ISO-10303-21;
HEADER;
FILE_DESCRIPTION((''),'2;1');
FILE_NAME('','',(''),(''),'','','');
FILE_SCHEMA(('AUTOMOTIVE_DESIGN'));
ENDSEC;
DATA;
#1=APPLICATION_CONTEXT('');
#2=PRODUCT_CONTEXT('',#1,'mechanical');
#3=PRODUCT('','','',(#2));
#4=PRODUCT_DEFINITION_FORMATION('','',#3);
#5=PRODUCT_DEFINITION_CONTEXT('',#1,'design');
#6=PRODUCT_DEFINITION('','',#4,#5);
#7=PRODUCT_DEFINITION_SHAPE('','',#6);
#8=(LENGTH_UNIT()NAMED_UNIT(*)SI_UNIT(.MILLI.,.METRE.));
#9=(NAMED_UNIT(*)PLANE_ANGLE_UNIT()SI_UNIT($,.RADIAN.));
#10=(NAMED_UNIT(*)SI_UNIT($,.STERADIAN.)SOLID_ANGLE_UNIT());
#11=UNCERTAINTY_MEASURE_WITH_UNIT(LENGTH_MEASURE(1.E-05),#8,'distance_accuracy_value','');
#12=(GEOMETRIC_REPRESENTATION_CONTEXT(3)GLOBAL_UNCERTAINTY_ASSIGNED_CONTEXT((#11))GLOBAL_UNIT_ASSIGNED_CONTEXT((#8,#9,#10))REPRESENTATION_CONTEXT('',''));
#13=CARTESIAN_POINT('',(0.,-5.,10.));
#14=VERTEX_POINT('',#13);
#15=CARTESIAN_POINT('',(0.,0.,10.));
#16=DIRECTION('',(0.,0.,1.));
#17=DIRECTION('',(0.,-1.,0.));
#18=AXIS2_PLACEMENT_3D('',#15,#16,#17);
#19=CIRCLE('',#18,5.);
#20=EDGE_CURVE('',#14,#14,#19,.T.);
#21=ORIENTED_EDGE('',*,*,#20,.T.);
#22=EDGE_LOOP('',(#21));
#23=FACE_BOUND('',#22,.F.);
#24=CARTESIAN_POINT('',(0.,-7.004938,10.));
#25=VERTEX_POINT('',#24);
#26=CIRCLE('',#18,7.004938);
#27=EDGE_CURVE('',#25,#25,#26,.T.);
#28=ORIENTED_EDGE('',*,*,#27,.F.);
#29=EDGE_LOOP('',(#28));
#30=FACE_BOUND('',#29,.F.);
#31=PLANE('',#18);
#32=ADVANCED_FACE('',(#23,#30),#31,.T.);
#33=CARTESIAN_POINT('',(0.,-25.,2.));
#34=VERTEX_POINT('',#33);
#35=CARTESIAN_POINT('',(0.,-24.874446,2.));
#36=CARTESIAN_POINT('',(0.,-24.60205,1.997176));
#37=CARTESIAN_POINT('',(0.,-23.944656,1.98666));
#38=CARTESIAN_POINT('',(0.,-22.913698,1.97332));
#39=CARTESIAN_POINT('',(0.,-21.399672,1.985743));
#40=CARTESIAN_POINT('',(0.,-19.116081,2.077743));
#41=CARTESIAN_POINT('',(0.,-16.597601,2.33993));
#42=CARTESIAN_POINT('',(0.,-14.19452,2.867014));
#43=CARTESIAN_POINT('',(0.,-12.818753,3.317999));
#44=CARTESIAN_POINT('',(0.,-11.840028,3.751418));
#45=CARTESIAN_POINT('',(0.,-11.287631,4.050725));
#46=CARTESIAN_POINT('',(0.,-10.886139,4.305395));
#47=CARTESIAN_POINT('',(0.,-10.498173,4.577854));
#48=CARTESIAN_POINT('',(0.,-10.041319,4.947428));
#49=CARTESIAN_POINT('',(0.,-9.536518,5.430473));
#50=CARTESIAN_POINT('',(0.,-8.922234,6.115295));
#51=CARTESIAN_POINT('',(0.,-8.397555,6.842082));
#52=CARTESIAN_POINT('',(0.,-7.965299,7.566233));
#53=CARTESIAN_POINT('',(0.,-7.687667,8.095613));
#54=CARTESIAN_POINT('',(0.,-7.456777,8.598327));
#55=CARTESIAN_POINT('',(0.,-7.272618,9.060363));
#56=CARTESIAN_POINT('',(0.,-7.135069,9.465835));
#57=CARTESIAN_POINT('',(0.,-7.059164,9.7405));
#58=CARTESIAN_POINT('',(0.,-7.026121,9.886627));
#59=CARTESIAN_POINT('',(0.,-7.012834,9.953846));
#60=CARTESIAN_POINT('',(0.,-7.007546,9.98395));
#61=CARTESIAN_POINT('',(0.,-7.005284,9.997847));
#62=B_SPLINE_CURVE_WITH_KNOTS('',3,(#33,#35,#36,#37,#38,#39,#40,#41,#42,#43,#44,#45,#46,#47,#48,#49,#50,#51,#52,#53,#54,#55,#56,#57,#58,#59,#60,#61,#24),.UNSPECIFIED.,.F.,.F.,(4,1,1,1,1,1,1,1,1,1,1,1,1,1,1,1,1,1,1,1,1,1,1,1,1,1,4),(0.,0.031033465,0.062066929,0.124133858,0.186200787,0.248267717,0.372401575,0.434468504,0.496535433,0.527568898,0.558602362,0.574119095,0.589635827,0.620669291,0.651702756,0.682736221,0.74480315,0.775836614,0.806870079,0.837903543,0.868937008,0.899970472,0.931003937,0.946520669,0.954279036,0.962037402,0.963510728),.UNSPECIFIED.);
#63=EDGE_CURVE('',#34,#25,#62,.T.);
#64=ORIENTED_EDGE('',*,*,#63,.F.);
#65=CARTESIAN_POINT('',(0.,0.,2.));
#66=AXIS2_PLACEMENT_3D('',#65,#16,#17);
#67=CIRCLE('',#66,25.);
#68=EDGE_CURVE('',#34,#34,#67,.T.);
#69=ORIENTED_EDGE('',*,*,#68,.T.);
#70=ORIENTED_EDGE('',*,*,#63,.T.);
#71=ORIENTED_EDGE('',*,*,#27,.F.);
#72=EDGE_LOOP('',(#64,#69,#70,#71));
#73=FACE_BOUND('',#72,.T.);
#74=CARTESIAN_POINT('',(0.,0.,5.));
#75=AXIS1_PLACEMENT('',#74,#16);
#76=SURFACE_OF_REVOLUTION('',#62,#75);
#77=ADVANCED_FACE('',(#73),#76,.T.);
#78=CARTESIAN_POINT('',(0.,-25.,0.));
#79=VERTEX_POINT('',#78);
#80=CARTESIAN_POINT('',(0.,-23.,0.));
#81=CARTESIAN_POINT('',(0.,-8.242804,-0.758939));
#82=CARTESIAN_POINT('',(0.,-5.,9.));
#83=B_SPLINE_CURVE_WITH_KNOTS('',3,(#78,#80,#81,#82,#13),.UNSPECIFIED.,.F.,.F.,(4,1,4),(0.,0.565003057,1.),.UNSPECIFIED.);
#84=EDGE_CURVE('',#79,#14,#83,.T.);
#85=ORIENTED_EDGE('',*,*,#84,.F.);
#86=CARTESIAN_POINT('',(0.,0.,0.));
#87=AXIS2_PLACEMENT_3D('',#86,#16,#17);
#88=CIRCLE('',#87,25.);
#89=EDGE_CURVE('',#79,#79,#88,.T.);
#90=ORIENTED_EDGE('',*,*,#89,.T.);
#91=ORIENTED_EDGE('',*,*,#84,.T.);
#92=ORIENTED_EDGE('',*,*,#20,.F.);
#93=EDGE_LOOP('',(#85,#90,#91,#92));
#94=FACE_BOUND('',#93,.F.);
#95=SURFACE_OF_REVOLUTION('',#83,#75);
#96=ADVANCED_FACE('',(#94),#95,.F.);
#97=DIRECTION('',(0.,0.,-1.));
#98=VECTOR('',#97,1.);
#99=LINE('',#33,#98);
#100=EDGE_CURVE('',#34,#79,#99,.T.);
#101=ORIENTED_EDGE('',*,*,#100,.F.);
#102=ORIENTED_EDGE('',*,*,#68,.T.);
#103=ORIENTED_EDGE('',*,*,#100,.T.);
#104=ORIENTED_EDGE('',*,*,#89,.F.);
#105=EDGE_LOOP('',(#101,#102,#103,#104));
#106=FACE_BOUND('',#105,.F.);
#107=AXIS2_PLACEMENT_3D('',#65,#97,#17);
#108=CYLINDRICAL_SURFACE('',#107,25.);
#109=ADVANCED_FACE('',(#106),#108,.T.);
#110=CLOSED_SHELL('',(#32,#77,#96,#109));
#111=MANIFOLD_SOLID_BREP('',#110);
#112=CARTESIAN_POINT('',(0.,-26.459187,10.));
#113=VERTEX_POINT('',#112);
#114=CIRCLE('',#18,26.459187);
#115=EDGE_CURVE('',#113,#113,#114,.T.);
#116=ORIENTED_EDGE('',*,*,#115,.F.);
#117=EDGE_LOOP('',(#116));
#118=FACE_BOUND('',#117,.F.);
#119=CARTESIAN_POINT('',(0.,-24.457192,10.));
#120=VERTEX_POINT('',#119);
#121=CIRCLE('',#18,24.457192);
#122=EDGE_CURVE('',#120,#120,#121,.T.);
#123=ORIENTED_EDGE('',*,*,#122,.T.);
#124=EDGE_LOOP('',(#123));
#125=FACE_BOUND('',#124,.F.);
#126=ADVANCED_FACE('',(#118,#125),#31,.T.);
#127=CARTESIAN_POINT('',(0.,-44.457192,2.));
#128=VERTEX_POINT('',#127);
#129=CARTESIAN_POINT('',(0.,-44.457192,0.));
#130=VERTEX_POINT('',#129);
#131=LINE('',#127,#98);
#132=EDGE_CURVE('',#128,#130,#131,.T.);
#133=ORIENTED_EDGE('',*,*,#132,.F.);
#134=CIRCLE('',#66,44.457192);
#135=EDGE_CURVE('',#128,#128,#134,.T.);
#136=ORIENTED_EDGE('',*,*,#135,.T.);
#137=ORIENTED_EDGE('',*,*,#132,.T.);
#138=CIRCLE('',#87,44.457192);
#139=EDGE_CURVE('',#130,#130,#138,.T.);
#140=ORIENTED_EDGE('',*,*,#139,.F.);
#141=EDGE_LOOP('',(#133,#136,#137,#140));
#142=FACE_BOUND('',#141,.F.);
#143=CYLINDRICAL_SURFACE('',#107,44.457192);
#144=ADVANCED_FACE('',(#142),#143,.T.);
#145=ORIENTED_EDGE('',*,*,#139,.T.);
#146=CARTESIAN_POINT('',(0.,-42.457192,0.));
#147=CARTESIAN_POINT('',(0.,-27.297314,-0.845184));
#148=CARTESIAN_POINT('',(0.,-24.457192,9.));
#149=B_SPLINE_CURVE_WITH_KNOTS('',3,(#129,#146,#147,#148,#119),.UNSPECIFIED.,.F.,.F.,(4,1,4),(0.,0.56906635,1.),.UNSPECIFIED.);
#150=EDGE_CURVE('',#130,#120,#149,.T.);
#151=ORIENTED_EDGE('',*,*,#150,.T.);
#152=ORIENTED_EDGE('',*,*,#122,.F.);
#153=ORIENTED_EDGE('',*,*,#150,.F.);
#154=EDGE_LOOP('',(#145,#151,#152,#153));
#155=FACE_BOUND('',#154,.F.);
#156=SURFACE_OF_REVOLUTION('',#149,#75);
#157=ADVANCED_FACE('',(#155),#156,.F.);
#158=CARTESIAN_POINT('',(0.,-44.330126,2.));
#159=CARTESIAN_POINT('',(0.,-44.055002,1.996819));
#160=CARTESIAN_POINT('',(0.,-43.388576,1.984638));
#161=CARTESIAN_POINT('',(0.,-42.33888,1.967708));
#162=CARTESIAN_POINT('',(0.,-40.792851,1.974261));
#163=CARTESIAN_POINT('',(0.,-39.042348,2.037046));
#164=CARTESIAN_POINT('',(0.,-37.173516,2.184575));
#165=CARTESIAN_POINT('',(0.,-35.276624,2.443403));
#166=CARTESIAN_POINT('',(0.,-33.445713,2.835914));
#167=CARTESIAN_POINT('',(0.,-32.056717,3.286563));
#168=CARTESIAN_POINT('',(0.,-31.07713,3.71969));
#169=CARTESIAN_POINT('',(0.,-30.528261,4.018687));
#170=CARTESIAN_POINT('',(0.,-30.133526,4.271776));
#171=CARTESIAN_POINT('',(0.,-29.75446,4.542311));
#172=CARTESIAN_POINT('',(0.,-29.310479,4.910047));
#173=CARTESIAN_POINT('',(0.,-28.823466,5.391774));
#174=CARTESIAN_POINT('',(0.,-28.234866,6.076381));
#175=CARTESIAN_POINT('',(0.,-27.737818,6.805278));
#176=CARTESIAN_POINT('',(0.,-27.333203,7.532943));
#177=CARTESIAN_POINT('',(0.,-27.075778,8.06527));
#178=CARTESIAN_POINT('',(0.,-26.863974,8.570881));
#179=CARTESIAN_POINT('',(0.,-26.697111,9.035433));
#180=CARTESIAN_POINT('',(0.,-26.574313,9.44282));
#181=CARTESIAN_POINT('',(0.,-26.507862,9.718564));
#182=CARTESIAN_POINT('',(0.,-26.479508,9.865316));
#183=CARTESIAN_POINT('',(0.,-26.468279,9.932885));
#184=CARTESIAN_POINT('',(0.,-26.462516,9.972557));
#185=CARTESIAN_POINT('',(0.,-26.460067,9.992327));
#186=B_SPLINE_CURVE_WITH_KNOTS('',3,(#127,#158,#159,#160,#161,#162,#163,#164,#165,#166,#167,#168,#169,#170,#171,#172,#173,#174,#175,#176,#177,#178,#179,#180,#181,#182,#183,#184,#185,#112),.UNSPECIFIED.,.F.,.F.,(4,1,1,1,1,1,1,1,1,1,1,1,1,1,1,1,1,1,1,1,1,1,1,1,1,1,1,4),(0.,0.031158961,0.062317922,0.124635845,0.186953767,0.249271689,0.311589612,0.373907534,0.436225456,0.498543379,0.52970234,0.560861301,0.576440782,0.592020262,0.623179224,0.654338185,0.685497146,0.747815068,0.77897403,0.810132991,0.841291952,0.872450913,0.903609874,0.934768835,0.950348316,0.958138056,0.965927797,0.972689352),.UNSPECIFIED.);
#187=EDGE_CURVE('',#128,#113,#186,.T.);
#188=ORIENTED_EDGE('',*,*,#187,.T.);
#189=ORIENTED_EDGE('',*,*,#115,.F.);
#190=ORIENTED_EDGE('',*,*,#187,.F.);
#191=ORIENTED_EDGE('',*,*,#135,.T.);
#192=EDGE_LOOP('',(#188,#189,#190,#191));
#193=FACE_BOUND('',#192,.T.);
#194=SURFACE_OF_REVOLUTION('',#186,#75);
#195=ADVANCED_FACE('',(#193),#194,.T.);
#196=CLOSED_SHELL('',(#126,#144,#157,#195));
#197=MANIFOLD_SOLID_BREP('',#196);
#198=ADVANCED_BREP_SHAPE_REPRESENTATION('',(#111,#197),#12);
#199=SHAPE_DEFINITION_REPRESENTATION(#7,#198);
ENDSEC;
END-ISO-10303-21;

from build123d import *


# Not quite as in the source:
# - ends of sketch curves that miss each other by under 0.0002 mm in the source are joined
# - the dataset's text gives a spline's control points without its knots; the knots are read off the source's solid


with BuildPart() as f1:
    # F0 (on Right) → F1 (revolve)
    with BuildSketch(Plane.YZ):
        with BuildLine():
            Line((-25, 2), (-25, 0))
            add(Edge.make_bspline(
                [(-25, 0), (-23, 0), (-8.2428042968, -0.7589394656), (-5, 9), (-5, 10)],
                knots=[0, 0, 0, 0, 0.5650030571, 1, 1, 1, 1], degree=3))
            Line((-5, 10), (-7.0049383579, 10))
            add(Edge.make_bspline(
                [(-25, 2), (-24.8744459418, 2), (-24.6020502652, 1.997175871), (-23.944655641, 1.9866596386), (-22.9136976758, 1.9733202808), (-21.3996719503, 1.985743252), (-19.1160811737, 2.077743282), (-16.5976005336, 2.3399298707), (-14.1945196869, 2.8670138177), (-12.8187529126, 3.3179992457), (-11.8400283506, 3.7514181037), (-11.2876311756, 4.0507249853), (-10.8861388194, 4.3053949031), (-10.4981730414, 4.5778538923), (-10.0413189077, 4.9474282096), (-9.5365181247, 5.4304731797), (-8.9222342339, 6.1152949724), (-8.3975554045, 6.8420822439), (-7.9652985038, 7.5662331827), (-7.6876671922, 8.0956131465), (-7.4567771073, 8.5983270086), (-7.2726178766, 9.0603628688), (-7.1350687961, 9.4658352411), (-7.0591636163, 9.7405002539), (-7.0261213485, 9.8866268551), (-7.0128338895, 9.9538462647), (-7.0075458312, 9.9839495944), (-7.0052842517, 9.9978468696), (-7.0049383579, 10)],
                knots=[0, 0, 0, 0, 0.0310334646, 0.0620669291, 0.1241338583, 0.1862007874, 0.2482677166, 0.3724015748, 0.434468504, 0.4965354331, 0.5275688977, 0.5586023623, 0.5741190946, 0.5896358268, 0.6206692914, 0.651702756, 0.6827362205, 0.7448031497, 0.7758366143, 0.8068700788, 0.8379035434, 0.868937008, 0.8999704725, 0.9310039371, 0.9465206694, 0.9542790355, 0.9620374017, 0.9635107276, 0.9635107276, 0.9635107276, 0.9635107276], degree=3))
        make_face()
    revolve(axis=Axis((0, 0, 5), (0, 0, 1)))


with BuildPart() as f1b:
    # F0 (on Right) → F1, piece 2 (revolve)
    with BuildSketch(Plane.YZ):
        with BuildLine():
            Line((-44.4571920699, 2), (-44.4571920699, 0))
            add(Edge.make_bspline(
                [(-44.4571920699, 0), (-42.4571920699, 0), (-27.2973141645, -0.8451838413), (-24.4571920699, 9), (-24.4571920699, 10)],
                knots=[0, 0, 0, 0, 0.5690663499, 1, 1, 1, 1], degree=3))
            Line((-24.4571920699, 10), (-26.4591868733, 10))
            add(Edge.make_bspline(
                [(-44.4571920699, 2), (-44.3301263073, 2), (-44.0550017899, 1.9968187714), (-43.3885761174, 1.984637898), (-42.3388801305, 1.9677078809), (-40.7928507171, 1.9742609155), (-39.0423480087, 2.0370462661), (-37.1735164079, 2.1845748373), (-35.2766244821, 2.4434034033), (-33.4457129988, 2.8359140628), (-32.056717366, 3.2865627122), (-31.0771304396, 3.7196898786), (-30.5282614983, 4.0186874168), (-30.1335263651, 4.2717762624), (-29.7544595412, 4.5423113151), (-29.3104788796, 4.9100474895), (-28.8234660731, 5.3917736768), (-28.2348659256, 6.076381331), (-27.7378183493, 6.8052783607), (-27.3332027443, 7.5329427062), (-27.0757776785, 8.0652700313), (-26.863973887, 8.5708812724), (-26.6971113951, 9.0354330637), (-26.5743133468, 9.4428196945), (-26.5078615414, 9.7185644574), (-26.4795083628, 9.8653164013), (-26.4682793946, 9.9328847921), (-26.4625155073, 9.9725570807), (-26.4600673639, 9.9923272701), (-26.4591868733, 10)],
                knots=[0, 0, 0, 0, 0.0311589612, 0.0623179224, 0.1246358447, 0.1869537671, 0.2492716894, 0.3115896118, 0.3739075342, 0.4362254565, 0.4985433789, 0.5297023401, 0.5608613012, 0.5764407818, 0.5920202624, 0.6231792236, 0.6543381848, 0.685497146, 0.7478150683, 0.7789740295, 0.8101329907, 0.8412919518, 0.872450913, 0.9036098742, 0.9347688354, 0.950348316, 0.9581380563, 0.9659277966, 0.9726893525, 0.9726893525, 0.9726893525, 0.9726893525], degree=3))
        make_face()
    revolve(axis=Axis((0, 0, 5), (0, 0, 1)))


solid = Compound([f1.part, f1b.part])
